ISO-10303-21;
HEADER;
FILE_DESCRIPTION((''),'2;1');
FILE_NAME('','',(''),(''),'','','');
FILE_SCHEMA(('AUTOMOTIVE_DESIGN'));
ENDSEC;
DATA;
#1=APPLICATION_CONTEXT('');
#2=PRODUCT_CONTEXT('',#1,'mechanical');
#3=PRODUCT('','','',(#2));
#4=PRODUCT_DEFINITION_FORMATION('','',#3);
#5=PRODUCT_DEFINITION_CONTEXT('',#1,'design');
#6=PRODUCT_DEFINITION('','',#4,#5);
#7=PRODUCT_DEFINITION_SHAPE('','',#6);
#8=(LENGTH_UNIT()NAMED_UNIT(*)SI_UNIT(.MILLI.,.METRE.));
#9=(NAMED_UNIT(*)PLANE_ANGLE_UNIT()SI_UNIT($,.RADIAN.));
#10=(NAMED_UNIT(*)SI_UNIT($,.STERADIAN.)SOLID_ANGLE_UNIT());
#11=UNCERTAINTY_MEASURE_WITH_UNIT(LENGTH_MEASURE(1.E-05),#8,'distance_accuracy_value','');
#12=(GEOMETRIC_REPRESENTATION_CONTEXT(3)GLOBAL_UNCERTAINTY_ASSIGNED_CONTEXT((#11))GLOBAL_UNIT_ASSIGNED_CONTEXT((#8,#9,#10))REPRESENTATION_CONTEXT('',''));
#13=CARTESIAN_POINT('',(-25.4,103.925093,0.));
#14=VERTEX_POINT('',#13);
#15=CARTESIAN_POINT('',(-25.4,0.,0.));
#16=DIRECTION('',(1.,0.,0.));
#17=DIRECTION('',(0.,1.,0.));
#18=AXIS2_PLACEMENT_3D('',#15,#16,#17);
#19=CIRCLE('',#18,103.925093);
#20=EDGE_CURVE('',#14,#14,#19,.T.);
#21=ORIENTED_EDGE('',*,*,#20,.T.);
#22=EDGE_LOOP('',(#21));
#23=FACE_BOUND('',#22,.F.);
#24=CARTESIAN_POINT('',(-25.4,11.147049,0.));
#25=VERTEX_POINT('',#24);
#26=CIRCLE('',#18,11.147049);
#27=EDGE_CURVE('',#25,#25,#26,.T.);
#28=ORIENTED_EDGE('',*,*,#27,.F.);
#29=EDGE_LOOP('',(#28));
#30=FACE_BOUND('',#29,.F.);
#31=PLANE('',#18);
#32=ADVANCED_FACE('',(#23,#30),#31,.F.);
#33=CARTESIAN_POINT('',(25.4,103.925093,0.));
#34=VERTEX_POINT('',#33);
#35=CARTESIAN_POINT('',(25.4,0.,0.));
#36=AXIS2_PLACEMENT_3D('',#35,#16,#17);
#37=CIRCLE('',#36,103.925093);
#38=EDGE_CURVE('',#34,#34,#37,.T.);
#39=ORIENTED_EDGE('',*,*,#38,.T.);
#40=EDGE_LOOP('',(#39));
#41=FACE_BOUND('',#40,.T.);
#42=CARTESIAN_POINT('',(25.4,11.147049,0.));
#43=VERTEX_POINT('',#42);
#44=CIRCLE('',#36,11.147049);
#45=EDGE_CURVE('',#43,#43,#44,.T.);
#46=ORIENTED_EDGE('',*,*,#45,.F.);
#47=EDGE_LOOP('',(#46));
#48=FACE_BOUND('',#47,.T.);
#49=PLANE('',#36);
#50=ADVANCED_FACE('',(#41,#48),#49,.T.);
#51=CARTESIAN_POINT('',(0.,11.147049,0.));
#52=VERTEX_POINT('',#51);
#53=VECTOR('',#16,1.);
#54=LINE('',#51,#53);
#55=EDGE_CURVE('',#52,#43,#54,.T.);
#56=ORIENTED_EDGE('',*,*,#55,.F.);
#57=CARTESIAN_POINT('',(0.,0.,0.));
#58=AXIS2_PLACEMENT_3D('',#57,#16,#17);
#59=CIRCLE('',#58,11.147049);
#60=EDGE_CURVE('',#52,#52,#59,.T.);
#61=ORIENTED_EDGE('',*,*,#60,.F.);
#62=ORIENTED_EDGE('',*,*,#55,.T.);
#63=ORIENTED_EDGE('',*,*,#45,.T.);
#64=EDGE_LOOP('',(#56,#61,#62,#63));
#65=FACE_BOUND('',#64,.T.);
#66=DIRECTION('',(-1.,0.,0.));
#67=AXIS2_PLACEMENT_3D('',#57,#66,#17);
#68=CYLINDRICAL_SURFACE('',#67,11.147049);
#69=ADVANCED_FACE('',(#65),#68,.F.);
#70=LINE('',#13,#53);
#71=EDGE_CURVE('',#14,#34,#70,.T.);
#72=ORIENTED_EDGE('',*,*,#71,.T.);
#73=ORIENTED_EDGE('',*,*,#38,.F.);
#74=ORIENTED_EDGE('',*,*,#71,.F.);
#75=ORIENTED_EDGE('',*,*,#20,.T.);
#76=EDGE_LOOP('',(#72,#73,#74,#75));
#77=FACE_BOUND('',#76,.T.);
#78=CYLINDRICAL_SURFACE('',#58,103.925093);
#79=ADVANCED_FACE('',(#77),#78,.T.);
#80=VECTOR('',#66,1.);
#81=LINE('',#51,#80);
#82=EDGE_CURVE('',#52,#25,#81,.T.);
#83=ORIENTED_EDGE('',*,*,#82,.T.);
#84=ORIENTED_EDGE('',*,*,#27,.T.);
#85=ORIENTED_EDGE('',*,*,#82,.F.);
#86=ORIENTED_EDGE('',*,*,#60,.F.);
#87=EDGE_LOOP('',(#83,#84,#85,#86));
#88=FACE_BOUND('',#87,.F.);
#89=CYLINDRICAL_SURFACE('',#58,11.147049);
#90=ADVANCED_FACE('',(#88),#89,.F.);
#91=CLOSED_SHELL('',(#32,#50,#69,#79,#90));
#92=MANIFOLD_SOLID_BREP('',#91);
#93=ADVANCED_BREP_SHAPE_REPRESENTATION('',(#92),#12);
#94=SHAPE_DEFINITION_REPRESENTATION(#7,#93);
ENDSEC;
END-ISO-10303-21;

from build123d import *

# Parameters (mm, degrees)
F0_R          = 103.9250934244
F0_R_2        = 11.1470485127
F1_DEPTH      = 25.4
F1_DEPTH_BACK = 25.4


# Not quite as in the source:
# - the program builds the solid bodies; features that only make, move or delete a surface that nothing else refers to are left out


with BuildPart() as f1:
    # F0 (on Right) → F1 (new body, two sides)
    with BuildSketch(Plane.YZ) as f1_sk:
        Circle(F0_R)
        Circle(F0_R_2, mode=Mode.SUBTRACT)
    extrude(amount=F1_DEPTH)
    extrude(f1_sk.sketch, amount=-F1_DEPTH_BACK)


solid = f1.part
